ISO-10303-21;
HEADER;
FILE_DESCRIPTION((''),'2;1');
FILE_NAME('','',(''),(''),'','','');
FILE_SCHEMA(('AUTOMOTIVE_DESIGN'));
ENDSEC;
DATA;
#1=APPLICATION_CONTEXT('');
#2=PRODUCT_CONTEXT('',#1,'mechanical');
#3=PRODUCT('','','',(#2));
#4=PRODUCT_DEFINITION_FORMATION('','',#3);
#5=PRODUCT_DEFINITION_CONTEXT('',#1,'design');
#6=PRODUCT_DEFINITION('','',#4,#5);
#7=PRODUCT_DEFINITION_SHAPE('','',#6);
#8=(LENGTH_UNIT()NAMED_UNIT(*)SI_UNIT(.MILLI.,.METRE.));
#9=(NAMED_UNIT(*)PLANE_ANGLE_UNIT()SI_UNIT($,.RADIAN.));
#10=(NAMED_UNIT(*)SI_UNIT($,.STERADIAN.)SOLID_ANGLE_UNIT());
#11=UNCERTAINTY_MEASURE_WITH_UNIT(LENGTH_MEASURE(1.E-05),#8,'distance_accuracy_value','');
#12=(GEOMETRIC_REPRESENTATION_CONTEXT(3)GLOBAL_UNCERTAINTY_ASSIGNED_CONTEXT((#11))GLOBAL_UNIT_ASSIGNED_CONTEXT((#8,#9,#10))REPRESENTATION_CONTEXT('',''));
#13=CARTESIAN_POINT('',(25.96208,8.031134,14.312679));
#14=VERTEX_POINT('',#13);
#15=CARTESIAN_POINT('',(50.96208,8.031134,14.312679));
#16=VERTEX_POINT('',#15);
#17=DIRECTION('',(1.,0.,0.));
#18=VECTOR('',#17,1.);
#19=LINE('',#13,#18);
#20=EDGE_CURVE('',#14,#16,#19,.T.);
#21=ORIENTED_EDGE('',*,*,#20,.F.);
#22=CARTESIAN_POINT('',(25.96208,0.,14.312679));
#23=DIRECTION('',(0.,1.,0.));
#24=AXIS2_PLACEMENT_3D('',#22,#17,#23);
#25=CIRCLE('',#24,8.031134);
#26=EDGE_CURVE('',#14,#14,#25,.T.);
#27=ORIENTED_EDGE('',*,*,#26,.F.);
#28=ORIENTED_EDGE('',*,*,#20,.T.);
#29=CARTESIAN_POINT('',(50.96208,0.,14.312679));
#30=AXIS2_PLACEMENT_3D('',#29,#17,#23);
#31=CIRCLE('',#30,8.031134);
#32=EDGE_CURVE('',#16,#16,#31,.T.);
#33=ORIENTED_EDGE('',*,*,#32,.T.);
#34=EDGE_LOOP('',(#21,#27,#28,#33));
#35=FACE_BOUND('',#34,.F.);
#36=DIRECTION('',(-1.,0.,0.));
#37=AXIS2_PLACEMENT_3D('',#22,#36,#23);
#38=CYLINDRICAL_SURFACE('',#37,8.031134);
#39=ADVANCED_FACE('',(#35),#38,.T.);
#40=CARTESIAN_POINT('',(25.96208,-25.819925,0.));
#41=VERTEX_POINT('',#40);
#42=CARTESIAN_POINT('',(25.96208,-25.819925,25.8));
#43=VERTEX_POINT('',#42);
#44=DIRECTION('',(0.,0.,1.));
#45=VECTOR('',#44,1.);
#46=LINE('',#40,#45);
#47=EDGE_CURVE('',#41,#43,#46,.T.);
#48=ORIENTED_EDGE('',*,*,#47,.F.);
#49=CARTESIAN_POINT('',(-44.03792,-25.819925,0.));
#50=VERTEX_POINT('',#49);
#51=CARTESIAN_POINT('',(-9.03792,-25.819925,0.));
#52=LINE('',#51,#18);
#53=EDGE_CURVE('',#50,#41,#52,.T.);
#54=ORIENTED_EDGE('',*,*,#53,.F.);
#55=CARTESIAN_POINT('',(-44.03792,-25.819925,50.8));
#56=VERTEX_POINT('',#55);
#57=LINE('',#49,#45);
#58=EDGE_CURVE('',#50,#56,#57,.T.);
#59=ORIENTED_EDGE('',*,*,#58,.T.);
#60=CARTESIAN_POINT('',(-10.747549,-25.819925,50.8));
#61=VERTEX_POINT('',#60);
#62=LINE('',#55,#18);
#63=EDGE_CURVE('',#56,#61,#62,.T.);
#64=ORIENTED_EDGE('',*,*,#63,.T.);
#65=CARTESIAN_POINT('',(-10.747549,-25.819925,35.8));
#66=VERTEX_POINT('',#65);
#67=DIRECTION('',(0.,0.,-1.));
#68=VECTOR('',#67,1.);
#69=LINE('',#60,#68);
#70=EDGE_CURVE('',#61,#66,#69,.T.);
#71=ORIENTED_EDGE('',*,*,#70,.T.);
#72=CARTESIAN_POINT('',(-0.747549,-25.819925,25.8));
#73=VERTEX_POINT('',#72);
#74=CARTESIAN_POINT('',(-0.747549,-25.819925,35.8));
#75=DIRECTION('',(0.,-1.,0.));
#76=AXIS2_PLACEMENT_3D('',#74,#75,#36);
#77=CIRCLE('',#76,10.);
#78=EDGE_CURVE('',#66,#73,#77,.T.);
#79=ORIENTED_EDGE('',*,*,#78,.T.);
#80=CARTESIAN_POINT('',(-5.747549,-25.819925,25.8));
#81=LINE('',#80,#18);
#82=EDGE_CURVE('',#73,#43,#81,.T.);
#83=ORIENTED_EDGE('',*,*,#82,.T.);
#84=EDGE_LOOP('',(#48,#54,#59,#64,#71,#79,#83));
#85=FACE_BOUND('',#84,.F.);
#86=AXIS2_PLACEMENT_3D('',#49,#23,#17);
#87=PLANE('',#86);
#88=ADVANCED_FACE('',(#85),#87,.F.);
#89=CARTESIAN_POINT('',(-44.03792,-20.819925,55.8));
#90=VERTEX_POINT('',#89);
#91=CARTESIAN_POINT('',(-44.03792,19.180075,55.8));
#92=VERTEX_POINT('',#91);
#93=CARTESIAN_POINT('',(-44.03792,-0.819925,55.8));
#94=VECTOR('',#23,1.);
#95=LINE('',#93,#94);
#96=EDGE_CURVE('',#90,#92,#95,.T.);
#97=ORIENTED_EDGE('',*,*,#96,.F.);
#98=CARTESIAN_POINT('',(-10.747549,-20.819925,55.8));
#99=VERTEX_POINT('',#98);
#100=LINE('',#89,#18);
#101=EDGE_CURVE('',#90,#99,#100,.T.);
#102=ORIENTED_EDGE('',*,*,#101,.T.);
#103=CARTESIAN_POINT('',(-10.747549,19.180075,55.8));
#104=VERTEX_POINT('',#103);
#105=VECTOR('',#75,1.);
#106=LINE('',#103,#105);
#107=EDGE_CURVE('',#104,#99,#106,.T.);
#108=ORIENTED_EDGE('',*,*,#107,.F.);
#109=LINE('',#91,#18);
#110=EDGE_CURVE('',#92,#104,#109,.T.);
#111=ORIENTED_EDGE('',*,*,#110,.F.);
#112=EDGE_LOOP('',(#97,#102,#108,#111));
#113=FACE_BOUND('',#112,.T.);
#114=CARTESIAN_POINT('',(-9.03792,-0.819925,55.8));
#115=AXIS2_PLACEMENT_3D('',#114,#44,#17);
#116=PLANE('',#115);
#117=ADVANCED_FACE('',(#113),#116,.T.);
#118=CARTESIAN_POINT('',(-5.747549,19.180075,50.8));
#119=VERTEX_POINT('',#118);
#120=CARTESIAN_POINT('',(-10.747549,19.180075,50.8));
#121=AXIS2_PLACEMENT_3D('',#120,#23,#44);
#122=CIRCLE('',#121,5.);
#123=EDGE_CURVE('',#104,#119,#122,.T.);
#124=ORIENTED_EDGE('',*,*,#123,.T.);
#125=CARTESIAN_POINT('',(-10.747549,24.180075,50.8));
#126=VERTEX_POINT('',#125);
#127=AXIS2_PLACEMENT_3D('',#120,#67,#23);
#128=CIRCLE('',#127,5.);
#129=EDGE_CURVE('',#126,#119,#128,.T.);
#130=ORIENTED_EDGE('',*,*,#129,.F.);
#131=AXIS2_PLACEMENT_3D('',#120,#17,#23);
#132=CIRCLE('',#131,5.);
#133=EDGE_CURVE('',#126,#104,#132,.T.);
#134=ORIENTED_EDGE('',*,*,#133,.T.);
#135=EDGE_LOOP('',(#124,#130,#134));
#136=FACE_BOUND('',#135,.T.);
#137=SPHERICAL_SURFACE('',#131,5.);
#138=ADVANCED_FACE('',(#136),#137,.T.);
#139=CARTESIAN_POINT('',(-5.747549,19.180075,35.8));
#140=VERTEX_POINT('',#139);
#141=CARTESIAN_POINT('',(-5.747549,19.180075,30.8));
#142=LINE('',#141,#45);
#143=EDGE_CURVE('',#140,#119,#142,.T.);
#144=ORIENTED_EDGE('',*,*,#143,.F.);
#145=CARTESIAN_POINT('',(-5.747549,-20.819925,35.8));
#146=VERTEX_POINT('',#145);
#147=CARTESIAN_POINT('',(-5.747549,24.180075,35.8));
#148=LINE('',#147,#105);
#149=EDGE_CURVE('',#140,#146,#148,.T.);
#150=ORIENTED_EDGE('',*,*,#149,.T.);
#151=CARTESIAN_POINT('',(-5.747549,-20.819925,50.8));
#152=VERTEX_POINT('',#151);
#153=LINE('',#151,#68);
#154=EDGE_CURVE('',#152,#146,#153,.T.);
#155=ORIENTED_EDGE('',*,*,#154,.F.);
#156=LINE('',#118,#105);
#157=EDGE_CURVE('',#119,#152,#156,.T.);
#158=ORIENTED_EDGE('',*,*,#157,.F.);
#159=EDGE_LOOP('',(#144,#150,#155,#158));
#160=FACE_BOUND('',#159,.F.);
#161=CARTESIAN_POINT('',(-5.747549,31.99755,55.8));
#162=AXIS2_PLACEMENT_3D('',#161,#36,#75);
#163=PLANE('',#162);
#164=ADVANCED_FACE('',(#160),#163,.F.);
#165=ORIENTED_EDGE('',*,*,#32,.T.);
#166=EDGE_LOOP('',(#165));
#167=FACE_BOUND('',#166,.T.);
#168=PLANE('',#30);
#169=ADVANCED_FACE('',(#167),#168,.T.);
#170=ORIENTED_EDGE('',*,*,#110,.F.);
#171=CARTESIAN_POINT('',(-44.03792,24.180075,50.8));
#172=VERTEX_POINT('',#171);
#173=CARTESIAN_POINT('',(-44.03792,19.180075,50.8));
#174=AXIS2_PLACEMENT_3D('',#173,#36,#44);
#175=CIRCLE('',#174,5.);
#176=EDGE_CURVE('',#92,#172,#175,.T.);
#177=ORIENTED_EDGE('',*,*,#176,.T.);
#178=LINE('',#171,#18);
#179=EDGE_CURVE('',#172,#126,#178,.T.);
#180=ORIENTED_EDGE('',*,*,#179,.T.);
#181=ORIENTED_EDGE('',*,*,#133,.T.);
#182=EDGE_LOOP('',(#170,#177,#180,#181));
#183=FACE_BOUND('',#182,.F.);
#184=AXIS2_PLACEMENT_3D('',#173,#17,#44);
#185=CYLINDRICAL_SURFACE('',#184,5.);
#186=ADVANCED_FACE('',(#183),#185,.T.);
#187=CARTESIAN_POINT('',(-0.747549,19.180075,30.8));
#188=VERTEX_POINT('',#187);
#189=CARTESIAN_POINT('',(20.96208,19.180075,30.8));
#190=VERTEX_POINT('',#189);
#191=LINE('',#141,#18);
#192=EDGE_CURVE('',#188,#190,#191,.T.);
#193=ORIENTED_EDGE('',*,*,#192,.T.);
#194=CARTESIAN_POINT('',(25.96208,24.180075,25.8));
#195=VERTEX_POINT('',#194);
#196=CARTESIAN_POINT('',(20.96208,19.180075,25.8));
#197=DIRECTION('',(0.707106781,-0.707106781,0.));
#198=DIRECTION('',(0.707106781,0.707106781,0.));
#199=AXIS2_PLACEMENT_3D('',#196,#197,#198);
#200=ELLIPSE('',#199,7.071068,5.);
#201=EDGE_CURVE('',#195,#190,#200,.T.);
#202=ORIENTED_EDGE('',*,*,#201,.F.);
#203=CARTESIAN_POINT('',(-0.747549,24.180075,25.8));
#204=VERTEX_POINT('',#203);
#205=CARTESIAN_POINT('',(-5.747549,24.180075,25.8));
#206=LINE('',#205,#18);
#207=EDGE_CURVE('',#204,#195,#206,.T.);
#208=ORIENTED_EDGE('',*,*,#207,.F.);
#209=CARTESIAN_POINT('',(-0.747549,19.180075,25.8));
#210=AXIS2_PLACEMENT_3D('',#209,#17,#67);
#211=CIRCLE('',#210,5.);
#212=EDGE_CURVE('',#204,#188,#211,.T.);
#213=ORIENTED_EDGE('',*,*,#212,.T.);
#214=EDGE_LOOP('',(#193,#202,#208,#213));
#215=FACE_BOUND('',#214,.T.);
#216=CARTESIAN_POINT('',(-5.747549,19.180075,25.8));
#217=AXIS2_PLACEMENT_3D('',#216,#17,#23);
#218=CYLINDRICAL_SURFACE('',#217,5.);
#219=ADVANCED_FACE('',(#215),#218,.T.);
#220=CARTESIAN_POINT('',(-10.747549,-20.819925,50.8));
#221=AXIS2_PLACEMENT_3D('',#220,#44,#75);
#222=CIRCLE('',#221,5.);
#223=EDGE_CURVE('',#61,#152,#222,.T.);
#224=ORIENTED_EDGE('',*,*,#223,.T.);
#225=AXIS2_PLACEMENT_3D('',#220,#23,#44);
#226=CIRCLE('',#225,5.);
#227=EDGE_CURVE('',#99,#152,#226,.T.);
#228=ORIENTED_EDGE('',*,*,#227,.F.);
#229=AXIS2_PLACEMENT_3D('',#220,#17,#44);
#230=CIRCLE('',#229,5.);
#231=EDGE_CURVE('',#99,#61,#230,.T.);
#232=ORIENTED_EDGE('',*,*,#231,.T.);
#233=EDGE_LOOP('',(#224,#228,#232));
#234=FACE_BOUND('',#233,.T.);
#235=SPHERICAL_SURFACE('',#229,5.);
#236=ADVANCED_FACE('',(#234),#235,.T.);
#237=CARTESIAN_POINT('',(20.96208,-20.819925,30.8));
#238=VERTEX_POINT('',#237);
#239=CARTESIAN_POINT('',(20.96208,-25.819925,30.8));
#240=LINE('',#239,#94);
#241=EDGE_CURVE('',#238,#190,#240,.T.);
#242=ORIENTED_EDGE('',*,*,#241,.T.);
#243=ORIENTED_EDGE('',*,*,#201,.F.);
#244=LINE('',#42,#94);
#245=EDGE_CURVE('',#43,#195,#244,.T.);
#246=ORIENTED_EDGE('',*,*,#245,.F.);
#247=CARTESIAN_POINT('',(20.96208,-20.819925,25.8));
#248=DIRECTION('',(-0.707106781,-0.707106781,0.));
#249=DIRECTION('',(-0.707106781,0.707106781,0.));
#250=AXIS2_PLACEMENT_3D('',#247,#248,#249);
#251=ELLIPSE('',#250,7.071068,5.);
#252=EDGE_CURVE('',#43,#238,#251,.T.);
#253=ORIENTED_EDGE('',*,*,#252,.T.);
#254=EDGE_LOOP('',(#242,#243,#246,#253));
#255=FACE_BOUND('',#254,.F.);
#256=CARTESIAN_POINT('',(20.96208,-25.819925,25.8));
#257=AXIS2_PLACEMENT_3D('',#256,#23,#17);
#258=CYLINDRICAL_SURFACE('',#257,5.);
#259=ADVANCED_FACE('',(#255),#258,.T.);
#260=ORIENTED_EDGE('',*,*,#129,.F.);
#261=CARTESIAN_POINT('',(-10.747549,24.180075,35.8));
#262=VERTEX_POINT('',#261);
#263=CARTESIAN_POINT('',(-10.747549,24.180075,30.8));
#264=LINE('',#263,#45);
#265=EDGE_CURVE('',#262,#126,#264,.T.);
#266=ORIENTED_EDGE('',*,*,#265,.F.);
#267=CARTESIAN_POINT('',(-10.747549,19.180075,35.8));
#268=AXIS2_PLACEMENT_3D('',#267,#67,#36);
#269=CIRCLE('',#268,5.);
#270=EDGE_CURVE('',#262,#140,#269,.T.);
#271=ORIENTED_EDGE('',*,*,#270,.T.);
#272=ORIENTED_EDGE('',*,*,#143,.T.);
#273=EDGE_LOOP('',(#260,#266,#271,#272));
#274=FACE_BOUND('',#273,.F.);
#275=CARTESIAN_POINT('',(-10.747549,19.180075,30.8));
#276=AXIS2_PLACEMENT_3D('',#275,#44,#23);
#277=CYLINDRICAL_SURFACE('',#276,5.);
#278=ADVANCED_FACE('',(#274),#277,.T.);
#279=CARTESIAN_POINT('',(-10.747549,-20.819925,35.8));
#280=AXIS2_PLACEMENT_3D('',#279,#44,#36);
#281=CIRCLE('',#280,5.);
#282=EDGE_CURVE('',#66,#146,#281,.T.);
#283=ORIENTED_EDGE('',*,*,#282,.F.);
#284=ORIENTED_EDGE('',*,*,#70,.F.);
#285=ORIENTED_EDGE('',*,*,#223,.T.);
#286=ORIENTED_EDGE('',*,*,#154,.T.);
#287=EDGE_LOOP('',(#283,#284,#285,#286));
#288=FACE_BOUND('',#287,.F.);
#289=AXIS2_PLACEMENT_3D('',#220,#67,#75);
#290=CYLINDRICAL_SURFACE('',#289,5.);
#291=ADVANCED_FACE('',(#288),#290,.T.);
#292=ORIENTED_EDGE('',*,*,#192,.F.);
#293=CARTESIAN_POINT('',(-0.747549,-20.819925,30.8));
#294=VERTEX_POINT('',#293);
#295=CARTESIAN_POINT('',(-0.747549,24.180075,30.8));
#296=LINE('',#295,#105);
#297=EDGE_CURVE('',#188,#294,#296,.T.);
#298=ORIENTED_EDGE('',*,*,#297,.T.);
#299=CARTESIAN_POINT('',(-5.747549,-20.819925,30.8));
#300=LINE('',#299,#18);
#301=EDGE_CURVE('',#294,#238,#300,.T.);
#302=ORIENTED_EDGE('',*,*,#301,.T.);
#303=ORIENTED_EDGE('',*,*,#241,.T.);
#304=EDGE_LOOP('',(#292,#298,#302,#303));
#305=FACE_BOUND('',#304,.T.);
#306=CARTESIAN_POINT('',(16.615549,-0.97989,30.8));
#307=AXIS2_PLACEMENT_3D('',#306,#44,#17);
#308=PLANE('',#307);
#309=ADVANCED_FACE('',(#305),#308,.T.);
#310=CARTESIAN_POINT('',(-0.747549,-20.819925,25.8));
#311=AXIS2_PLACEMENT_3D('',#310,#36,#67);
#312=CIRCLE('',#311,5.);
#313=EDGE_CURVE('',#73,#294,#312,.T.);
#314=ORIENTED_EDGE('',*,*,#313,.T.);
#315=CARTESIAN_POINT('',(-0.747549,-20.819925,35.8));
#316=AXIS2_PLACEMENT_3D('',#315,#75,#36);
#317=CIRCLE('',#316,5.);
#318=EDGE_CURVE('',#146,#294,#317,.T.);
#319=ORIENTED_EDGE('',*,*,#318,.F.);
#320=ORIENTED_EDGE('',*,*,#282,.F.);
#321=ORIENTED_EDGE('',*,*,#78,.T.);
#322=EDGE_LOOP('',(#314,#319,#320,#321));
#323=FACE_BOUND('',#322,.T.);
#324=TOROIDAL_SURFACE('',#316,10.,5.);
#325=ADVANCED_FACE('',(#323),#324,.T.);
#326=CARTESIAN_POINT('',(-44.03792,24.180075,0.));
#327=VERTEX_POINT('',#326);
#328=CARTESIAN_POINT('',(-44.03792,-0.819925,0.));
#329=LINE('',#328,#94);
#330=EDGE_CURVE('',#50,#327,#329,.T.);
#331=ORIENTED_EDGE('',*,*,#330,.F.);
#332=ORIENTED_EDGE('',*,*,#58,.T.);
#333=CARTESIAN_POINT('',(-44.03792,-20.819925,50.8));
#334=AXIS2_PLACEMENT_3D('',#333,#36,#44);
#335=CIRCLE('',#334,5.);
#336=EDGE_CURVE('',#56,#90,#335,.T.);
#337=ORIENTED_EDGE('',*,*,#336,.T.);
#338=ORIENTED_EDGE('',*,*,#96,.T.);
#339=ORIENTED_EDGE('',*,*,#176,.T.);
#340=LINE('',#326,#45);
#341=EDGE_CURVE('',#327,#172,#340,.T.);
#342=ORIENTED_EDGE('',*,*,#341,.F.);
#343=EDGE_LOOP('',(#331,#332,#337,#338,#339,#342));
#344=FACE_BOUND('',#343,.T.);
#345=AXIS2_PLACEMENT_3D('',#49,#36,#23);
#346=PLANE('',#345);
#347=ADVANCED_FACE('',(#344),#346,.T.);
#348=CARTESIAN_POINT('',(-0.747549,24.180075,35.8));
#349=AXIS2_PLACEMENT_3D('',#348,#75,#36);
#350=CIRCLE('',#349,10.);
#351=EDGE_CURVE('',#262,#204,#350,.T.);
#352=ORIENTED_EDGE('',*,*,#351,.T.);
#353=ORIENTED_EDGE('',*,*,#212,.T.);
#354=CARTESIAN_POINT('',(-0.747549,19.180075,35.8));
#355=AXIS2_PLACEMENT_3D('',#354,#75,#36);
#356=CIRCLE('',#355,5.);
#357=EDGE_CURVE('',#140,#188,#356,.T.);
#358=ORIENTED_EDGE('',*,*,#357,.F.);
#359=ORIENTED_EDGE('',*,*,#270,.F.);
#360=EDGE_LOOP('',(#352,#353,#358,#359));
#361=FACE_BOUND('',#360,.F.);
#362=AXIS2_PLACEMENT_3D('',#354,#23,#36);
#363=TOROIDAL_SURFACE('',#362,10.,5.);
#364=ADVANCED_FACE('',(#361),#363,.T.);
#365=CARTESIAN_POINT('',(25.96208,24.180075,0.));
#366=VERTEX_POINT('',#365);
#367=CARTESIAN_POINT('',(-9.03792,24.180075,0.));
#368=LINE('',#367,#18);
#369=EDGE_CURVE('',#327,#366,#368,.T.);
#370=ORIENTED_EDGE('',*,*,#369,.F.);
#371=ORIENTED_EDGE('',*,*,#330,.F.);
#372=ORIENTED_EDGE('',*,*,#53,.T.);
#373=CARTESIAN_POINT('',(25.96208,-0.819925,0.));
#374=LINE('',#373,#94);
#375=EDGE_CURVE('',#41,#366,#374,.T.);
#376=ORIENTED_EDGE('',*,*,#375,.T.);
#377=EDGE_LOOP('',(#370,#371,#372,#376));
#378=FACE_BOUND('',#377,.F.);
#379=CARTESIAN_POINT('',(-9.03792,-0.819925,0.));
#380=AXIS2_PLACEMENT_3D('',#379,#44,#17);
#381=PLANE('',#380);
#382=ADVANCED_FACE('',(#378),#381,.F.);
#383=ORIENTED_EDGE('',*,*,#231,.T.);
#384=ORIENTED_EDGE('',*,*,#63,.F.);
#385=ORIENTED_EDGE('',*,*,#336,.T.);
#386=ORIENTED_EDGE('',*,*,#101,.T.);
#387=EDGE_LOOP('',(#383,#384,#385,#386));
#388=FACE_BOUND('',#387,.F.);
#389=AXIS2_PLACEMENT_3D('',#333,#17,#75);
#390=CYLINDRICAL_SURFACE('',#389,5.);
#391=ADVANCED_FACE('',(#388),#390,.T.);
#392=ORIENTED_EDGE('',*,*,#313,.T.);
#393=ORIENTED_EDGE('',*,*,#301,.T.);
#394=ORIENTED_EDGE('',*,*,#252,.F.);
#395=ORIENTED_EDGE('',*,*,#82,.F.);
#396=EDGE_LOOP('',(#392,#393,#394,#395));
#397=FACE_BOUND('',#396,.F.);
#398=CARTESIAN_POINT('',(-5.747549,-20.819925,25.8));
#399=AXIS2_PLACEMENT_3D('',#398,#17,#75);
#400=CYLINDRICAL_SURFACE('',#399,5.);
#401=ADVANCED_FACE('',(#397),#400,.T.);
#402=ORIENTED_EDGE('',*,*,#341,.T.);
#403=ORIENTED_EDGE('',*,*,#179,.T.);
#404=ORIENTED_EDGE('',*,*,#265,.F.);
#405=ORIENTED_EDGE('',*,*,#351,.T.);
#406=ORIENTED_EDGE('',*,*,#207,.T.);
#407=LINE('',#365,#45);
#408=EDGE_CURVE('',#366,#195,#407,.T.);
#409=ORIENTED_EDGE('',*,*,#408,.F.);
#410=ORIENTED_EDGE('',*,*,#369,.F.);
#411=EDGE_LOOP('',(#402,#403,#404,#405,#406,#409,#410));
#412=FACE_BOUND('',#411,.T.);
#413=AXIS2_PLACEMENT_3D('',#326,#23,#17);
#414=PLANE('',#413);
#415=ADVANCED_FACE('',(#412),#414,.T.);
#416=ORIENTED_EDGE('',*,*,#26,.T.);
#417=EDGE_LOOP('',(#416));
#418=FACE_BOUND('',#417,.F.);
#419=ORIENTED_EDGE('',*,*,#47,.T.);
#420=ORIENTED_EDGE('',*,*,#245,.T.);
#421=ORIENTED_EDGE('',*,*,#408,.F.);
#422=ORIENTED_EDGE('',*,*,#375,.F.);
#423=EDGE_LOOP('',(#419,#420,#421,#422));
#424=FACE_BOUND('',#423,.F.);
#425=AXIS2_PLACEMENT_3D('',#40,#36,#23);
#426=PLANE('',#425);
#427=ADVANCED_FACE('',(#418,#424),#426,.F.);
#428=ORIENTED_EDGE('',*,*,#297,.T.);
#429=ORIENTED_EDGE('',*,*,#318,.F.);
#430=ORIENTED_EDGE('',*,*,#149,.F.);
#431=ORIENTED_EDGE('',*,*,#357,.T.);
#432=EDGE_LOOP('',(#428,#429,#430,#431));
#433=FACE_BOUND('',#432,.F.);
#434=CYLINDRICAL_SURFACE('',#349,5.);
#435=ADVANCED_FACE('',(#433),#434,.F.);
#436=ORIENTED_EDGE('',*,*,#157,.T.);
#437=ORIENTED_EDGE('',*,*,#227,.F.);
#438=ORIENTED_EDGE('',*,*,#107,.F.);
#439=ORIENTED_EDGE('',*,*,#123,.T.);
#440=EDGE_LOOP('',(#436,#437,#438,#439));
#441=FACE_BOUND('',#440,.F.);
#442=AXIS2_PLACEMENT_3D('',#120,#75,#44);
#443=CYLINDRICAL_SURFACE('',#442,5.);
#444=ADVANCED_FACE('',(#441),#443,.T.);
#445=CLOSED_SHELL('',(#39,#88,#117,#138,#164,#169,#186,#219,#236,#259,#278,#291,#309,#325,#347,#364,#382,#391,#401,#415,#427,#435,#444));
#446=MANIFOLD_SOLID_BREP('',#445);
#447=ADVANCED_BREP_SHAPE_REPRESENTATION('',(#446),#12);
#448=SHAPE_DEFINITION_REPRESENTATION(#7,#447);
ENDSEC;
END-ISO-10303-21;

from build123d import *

# Parameters (mm, degrees)
F0_W     = 70
F0_H     = 50
F1_DEPTH = 55.8
F2_R     = 5
F3_R     = 5
F4_W     = 31.709628962
F4_H     = 40
F5_DEPTH = 25
F6_R     = 5
F7_R     = 8.0311344771
F8_DEPTH = 25


with BuildPart() as f1:
    # F0 (on Top) → F1 (new body)
    with BuildSketch(Plane.XY):
        with Locations((-9.0379202738, -0.8199248582)):
            Rectangle(F0_W, F0_H)
    extrude(amount=F1_DEPTH)

    # F2
    f2_edges = [f1.edges().sort_by_distance(p)[0] for p in [
        (-9.03792, -25.819925, 55.8),
    ]]
    fillet(f2_edges, radius=F2_R)

    # F3
    f3_edges = [f1.edges().sort_by_distance(p)[0] for p in [
        (-9.03792, 24.180075, 55.8),
    ]]
    fillet(f3_edges, radius=F3_R)

    # F4 (on face) → F5 (cut)
    with BuildSketch(Plane.XY.offset(55.8)):
        Polygon((30.625000596, 31.9975502789), (-5.7475492358, 31.9975502789), (-5.7475492358, 19.1800751418), (25.9620797262, 19.1800751418), (25.9620797262, -20.8199248582), (-5.7475492358, -20.8199248582), (-5.7475492358, -34.0563766658), (30.625000596, -34.0563766658), align=None)
        with Locations((10.1072652452, -0.8199248582)):
            Rectangle(F4_W, F4_H)
    extrude(amount=-F5_DEPTH, mode=Mode.SUBTRACT)

    # F6
    f6_edges = [f1.edges().sort_by_distance(p)[0] for p in [
        (10.107265, 24.180075, 30.8),
        (25.96208, -0.819925, 30.8),
        (10.107265, -25.819925, 30.8),
        (-5.747549, -0.819925, 30.8),
        (-5.747549, -0.819925, 55.8),
        (-5.747549, 22.715609, 54.335534),
        (-5.747549, -24.355459, 54.335534),
    ]]
    fillet(f6_edges, radius=F6_R)

    # F7 (on face) → F8 (join)
    with BuildSketch(Plane.YZ.offset(25.9620797262)):
        with Locations((0, 14.312678948)):
            Circle(F7_R)
    extrude(amount=F8_DEPTH)


solid = f1.part
